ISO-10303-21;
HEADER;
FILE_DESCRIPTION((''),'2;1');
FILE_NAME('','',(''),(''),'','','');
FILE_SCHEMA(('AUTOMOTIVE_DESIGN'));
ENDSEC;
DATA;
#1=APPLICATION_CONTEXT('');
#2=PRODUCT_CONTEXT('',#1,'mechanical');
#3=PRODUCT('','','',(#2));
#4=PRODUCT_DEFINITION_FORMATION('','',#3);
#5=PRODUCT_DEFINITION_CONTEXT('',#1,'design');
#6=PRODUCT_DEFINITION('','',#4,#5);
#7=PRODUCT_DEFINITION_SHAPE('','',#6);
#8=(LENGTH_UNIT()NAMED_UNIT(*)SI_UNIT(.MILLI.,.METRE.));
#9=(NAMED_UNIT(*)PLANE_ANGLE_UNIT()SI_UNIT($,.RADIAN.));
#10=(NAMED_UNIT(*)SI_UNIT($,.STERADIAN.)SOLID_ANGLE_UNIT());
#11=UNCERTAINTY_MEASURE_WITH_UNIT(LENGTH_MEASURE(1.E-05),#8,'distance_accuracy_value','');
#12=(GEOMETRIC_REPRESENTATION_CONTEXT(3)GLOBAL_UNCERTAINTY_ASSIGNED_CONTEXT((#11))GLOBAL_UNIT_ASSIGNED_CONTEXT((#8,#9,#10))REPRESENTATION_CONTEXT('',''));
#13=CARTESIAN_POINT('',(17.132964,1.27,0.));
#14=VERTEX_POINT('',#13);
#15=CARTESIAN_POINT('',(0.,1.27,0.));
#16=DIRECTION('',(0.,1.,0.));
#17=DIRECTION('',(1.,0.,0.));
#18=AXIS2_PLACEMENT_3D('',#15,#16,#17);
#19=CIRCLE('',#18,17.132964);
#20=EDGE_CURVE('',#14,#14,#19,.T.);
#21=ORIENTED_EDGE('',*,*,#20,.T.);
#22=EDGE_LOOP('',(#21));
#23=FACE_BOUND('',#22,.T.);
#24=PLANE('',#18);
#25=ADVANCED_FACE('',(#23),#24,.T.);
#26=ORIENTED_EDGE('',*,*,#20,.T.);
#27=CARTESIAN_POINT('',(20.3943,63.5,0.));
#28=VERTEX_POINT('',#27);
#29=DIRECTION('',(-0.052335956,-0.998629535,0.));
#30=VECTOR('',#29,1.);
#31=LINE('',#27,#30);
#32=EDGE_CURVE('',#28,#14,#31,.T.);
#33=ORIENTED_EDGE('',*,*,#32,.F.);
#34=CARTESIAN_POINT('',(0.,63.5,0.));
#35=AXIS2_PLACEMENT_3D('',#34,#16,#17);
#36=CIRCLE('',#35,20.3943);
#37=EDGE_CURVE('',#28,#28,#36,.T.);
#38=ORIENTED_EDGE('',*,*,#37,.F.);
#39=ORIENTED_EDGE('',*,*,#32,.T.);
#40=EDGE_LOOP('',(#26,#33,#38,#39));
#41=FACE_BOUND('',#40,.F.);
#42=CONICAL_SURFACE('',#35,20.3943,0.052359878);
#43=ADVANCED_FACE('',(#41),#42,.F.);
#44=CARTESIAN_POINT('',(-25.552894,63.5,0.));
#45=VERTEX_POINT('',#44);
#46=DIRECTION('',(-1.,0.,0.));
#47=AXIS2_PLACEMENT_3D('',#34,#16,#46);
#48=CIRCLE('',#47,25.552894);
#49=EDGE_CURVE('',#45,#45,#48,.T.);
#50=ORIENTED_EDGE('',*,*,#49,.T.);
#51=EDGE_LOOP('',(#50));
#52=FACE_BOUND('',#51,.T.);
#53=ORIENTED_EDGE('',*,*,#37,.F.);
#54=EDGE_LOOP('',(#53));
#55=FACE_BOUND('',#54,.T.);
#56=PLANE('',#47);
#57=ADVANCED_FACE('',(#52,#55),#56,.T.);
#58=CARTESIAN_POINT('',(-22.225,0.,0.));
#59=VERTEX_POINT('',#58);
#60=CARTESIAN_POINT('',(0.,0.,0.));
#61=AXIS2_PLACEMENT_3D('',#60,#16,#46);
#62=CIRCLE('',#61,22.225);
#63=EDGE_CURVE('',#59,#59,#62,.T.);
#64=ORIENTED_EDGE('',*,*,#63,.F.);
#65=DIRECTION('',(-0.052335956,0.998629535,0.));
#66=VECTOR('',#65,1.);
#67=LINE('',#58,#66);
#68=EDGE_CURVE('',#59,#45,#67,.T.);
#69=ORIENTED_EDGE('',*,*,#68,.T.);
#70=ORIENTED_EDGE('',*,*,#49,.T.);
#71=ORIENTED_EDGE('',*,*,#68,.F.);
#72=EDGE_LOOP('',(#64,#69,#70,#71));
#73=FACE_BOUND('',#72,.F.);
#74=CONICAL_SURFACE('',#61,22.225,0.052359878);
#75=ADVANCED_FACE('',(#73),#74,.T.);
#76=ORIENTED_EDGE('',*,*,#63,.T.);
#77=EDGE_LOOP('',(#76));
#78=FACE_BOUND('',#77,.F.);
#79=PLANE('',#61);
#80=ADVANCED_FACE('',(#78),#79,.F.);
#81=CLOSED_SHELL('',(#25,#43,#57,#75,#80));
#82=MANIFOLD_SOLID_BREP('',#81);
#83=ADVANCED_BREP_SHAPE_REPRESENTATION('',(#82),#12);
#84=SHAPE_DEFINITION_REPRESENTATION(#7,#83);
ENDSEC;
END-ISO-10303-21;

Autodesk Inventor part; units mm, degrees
ref_plane "YZ Plane" through (0, 0, 0) normal (1, 0, 0) x (0, 1, 0)
ref_plane "XZ Plane" through (0, 0, 0) normal (0, 1, 0) x (-1, 0, 0)
ref_plane "XY Plane" through (0, 0, 0) normal (0, 0, 1) x (1, 0, 0)
sketch "Sketch1" plane through (0, 0, 0) normal (0, 1, 0) x (-1, 0, 0)
  circle A0 centre (0, 0) radius 22.225
  dimension "d0" = 44.45
extrude "Extrusion1" add sketch "Sketch1" along normal blind 63.5 draft 3
sketch "Sketch2" plane through (0, 63.5, 0) normal (0, 1, 0) x (1, 0, 0)
  circle A0 centre (0, 0) radius 25.5529 projected
  circle A1 centre (0, 0) radius 20.3943
extrude "Extrusion2" cut sketch "Sketch2" against normal blind 62.23 draft -3 contours A1
equation "\"BendRadius\" = Thickness"
equation "\"BendReliefWidth\" = Thickness"
equation "\"BendReliefDepth\" = 0.5 * Thickness"
equation "\"CornerReliefSize\" = 4 * Thickness"
equation "\"MinimumRemnant\" = 2 * Thickness"
equation "\"TransitionRadius\" = BendRadius"
equation "\"JacobiRadiusSize\" = BendRadius"
equation "\"GapSize\" = Thickness"
equation "\"Thickness\" = 3.048"
properties part number "glass"
